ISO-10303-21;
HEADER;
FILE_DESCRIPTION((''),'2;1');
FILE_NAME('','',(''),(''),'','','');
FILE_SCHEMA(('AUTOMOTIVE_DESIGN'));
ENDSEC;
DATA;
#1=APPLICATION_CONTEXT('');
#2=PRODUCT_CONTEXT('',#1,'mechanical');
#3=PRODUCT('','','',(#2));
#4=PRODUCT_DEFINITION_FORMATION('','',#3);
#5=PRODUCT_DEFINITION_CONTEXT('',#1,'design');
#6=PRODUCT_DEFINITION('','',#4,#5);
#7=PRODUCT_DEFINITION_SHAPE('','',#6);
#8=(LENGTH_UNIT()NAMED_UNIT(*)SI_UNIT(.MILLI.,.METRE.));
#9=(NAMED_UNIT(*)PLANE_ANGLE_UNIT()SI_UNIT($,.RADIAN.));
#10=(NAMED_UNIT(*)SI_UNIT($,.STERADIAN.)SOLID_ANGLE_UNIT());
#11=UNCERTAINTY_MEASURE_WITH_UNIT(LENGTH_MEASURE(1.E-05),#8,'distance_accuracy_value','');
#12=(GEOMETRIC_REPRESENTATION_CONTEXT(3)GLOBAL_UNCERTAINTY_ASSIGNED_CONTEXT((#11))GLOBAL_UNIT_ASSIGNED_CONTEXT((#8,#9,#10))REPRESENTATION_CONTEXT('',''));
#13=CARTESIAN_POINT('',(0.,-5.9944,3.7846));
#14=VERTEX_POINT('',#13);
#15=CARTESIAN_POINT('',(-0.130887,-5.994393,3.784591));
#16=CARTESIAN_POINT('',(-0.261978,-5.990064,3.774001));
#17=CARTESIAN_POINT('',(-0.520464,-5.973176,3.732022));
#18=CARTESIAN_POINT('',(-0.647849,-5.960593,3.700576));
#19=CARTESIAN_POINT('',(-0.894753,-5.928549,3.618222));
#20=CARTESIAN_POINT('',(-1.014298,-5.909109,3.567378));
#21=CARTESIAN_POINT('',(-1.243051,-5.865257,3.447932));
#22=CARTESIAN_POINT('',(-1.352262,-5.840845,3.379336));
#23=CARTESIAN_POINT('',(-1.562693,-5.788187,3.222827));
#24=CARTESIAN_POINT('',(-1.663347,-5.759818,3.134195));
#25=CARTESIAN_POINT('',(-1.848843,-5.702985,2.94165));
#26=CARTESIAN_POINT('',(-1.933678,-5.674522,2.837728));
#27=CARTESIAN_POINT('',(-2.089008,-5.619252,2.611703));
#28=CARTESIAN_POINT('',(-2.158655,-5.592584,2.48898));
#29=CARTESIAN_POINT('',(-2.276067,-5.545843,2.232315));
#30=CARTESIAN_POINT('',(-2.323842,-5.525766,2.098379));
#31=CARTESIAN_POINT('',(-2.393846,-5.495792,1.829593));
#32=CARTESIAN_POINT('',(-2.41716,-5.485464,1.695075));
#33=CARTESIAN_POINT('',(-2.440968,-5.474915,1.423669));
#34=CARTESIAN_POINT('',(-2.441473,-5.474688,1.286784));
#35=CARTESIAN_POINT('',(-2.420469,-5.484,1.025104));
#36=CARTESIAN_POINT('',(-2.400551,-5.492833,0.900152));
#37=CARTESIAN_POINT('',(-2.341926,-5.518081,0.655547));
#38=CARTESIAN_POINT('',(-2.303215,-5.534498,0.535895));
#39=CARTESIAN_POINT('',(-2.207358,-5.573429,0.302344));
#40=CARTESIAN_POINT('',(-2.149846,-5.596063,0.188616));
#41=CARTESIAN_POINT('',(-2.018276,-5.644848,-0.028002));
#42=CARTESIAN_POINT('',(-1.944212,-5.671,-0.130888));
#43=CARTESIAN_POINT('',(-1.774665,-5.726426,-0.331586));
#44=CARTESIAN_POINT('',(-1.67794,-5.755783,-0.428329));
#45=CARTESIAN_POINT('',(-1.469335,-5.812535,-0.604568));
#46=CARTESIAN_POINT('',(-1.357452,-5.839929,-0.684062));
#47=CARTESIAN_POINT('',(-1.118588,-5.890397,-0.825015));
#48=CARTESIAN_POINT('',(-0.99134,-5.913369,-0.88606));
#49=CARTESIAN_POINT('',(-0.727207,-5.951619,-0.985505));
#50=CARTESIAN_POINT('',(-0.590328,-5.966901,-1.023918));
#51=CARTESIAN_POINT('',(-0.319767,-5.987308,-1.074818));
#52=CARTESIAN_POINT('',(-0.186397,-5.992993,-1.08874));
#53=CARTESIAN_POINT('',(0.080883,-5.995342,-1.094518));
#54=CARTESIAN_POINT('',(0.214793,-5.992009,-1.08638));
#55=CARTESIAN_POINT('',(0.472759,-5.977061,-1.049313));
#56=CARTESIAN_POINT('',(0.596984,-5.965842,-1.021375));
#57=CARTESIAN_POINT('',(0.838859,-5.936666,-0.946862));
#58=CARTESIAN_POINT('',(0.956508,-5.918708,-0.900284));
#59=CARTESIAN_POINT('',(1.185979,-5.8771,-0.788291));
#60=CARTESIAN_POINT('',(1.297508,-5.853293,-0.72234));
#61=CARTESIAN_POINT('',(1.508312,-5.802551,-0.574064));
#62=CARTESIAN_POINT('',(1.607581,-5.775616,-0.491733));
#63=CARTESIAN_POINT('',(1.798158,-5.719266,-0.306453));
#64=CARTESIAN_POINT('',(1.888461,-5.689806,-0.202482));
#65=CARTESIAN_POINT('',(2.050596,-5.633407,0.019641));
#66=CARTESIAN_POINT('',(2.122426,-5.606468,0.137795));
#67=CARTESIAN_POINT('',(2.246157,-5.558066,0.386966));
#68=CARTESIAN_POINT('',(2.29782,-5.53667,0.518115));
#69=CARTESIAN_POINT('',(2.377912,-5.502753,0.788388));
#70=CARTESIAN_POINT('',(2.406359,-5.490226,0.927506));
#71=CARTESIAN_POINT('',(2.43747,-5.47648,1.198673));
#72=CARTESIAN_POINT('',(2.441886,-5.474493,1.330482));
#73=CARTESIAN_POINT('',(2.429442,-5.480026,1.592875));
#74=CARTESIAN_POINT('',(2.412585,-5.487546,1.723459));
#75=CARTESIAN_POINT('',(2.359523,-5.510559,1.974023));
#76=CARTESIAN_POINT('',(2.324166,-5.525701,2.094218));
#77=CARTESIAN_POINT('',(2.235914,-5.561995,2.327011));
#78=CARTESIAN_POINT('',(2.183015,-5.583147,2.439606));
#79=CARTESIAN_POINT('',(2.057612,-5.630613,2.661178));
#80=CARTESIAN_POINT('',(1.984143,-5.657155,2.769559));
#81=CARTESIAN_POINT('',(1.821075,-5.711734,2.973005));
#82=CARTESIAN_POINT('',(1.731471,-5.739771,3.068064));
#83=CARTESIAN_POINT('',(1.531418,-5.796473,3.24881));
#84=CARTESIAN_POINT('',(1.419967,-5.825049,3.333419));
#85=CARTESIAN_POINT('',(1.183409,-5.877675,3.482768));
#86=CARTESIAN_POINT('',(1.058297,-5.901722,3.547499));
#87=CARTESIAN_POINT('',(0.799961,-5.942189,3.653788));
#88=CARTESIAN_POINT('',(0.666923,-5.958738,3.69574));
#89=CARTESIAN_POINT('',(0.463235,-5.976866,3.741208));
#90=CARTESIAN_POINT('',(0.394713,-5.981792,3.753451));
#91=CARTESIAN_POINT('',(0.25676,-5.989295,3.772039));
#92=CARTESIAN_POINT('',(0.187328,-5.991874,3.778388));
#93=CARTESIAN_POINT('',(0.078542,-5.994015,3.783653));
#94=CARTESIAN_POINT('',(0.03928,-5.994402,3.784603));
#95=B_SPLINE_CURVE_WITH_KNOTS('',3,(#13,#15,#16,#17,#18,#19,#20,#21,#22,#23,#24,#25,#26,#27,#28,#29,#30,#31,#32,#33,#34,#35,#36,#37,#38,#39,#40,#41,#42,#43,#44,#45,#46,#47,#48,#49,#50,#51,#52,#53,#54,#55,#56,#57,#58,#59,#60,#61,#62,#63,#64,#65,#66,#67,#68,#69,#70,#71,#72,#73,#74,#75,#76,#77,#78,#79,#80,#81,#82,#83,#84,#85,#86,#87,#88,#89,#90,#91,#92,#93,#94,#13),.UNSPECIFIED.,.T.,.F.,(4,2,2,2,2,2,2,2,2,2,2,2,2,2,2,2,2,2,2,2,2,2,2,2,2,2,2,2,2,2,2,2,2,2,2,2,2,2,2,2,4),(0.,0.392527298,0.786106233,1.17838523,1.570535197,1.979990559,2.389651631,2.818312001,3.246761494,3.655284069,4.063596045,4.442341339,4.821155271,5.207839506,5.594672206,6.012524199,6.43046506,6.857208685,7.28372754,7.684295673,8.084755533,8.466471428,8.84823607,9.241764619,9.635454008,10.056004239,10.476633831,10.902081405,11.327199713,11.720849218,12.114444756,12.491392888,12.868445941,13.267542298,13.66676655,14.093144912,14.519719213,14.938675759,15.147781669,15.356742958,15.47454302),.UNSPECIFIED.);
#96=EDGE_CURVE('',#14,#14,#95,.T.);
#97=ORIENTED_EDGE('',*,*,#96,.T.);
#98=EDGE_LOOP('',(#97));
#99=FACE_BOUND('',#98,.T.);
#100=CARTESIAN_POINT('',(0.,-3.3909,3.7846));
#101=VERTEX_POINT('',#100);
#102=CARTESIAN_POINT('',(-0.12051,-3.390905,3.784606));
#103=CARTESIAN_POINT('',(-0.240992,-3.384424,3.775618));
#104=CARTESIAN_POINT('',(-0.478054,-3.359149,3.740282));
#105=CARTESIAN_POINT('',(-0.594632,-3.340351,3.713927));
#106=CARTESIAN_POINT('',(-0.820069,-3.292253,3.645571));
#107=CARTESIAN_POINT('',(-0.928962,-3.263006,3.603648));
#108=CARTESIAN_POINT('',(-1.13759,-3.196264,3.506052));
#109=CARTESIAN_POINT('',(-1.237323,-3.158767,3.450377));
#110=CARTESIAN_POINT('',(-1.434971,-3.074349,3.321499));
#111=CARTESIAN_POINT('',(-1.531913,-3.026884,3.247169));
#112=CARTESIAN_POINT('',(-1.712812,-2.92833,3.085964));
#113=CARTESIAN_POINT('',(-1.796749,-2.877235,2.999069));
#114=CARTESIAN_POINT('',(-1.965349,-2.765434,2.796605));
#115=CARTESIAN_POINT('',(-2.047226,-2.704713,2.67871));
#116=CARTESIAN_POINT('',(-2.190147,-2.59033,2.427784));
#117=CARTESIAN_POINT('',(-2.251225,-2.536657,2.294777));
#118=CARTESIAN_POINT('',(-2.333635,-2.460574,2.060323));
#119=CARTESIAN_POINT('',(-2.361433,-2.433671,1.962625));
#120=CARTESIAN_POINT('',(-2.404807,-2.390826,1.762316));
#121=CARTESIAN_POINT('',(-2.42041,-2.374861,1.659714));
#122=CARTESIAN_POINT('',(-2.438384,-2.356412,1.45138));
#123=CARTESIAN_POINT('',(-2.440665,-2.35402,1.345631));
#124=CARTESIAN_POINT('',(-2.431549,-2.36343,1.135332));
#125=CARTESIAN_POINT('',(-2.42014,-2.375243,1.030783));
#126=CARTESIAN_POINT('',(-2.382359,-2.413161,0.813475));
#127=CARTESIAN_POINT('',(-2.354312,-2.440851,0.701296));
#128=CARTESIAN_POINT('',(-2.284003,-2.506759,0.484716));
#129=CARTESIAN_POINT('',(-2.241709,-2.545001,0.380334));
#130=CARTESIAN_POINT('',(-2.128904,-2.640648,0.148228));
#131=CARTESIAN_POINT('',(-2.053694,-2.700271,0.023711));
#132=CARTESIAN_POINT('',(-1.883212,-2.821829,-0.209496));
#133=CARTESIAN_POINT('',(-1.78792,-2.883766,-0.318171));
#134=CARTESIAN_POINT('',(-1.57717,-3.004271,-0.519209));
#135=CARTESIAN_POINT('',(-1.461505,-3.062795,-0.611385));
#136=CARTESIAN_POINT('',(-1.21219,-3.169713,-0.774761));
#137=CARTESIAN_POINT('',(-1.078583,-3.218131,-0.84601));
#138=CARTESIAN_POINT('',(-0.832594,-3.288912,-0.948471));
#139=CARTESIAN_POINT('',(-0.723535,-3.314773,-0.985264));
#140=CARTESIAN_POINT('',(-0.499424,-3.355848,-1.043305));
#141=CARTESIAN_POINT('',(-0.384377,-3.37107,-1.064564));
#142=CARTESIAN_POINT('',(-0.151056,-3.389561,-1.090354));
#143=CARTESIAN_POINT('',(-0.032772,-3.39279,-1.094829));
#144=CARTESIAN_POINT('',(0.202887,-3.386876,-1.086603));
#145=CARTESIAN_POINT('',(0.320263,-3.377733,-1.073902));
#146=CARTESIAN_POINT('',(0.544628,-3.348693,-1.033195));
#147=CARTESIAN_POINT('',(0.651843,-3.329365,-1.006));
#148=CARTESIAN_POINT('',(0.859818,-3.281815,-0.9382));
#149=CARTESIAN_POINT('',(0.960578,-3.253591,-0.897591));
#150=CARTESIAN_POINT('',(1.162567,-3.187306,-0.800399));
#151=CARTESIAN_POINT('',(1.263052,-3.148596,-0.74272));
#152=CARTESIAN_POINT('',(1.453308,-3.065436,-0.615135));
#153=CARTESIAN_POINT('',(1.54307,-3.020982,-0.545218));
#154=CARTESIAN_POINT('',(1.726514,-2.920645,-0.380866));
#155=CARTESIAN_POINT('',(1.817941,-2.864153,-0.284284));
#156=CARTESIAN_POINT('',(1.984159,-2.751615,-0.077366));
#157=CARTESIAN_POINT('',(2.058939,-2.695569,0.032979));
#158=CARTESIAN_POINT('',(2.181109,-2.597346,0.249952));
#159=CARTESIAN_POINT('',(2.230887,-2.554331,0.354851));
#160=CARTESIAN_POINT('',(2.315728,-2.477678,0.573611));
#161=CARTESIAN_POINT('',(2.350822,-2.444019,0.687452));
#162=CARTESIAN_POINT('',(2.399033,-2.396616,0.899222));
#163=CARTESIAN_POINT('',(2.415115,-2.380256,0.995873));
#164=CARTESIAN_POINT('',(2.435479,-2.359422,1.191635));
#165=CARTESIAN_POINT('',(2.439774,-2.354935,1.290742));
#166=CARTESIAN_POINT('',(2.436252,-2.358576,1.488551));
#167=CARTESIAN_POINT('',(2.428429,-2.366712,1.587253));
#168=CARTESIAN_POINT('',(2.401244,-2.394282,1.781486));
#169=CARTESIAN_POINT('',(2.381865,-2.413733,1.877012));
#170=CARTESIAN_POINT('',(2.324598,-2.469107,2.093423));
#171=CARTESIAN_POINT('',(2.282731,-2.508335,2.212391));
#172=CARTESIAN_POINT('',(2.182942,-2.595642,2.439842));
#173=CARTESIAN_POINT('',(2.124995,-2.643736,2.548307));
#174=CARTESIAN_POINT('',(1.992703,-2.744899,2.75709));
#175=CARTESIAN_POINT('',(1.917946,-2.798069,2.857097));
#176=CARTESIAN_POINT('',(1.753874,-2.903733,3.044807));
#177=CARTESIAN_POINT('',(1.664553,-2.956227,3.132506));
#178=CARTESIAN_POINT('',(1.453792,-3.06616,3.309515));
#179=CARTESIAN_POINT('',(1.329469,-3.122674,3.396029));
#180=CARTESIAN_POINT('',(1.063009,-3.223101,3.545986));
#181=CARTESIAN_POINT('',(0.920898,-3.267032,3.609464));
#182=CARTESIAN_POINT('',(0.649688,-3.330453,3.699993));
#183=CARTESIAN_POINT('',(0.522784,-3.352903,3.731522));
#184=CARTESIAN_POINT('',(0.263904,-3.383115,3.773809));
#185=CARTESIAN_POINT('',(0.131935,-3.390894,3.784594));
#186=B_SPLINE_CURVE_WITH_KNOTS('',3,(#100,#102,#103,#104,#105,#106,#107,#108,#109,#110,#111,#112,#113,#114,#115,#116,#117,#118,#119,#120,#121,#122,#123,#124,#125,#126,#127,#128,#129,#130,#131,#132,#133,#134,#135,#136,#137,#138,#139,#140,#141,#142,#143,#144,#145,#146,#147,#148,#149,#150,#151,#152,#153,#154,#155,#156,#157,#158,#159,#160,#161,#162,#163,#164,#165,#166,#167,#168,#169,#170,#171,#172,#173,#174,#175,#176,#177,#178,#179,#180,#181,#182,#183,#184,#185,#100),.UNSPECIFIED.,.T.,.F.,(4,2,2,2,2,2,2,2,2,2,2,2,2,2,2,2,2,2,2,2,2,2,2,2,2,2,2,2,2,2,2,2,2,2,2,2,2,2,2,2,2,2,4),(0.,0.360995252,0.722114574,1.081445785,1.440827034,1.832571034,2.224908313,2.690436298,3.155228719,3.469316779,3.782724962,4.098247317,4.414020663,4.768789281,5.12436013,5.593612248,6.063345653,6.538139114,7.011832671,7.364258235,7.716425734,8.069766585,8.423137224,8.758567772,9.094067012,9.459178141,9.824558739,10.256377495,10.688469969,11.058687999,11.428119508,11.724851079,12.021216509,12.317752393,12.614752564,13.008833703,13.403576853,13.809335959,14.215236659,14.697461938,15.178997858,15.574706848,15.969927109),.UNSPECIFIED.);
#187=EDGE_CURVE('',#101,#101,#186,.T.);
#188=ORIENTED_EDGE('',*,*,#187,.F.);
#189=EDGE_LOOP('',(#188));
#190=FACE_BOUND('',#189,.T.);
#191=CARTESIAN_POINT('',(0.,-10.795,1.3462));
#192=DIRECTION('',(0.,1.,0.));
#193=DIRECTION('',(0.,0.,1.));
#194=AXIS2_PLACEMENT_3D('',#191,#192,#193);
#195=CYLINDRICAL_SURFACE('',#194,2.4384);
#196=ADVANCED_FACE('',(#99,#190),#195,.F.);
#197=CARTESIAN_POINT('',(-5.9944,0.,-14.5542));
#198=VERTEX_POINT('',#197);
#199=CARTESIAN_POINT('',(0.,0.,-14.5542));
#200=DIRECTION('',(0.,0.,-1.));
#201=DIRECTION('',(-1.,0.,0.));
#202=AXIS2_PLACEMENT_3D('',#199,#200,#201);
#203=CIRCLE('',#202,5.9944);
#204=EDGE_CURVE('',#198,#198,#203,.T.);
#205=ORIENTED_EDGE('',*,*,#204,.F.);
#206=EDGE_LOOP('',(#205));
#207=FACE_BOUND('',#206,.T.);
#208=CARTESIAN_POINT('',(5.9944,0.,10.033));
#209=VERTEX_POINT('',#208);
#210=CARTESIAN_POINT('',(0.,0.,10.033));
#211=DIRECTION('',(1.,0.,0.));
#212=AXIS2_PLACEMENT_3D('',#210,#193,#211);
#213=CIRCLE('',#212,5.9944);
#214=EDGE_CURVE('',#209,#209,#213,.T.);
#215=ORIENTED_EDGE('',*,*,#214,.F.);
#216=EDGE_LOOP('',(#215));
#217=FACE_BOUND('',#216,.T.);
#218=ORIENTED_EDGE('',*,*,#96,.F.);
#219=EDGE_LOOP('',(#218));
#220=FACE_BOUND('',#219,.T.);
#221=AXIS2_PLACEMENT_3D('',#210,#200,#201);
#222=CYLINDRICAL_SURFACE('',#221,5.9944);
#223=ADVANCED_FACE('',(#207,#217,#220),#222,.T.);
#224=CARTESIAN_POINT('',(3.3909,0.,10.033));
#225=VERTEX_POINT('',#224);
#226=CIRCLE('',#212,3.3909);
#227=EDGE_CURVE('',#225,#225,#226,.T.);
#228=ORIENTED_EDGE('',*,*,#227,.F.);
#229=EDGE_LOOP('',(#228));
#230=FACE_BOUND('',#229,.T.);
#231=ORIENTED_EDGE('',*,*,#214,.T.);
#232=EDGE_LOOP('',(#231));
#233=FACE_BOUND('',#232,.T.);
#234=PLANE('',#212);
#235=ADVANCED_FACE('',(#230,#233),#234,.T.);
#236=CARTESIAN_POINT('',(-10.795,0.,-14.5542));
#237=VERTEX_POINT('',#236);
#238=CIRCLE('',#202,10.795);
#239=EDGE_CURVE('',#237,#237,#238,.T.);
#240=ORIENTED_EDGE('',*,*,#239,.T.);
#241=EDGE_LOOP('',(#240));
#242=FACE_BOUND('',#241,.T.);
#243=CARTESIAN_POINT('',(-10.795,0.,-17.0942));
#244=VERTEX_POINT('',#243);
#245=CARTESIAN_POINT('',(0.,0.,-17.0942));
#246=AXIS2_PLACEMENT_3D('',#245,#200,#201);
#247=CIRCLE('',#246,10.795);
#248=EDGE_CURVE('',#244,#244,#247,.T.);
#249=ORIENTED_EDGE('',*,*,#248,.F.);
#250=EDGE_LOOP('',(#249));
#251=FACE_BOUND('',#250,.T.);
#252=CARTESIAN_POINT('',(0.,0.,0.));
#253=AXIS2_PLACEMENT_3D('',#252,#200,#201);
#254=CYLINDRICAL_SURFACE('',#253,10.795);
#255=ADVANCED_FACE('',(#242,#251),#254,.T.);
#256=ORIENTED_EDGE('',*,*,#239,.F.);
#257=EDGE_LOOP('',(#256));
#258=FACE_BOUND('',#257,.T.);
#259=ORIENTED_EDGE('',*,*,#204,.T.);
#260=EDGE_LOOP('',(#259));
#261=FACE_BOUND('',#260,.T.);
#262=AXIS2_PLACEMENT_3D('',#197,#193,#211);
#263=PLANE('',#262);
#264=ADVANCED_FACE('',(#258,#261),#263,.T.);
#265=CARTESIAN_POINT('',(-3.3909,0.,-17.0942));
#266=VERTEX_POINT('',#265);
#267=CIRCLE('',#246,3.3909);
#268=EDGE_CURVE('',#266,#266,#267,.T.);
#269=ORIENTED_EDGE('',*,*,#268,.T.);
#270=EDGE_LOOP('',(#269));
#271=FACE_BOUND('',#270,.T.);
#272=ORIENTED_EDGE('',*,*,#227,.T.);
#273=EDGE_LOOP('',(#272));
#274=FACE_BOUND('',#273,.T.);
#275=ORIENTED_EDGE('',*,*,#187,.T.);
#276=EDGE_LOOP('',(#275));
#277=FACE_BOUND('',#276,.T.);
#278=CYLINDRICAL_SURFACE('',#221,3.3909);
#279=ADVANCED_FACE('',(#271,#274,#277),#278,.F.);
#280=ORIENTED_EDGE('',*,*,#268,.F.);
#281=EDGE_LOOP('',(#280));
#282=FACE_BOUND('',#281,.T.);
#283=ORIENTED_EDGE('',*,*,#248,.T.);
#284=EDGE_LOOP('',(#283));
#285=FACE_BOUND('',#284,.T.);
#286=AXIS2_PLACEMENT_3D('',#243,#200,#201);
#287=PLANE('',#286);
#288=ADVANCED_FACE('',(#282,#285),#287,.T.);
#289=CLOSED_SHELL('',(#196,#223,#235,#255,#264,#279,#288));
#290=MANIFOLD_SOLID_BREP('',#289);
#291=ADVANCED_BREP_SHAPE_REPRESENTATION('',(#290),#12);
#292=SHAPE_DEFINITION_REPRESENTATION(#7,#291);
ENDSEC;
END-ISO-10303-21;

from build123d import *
from build123d.topology import SkipClean

# Parameters (mm, degrees)
SKETCH2_R           = 5.9944
SKETCH2_R_2         = 3.3909
BOSS_EXTRUDE1_DEPTH = 10.033
SKETCH3_R           = 2.4384
CUT_EXTRUDE1_DEPTH  = 23.918894468


with BuildPart() as part:
    # Sketch2 → Boss-Extrude1 (new body)
    with BuildSketch(Plane.XY):
        Circle(SKETCH2_R)
        Circle(SKETCH2_R_2, mode=Mode.SUBTRACT)
    extrude(amount=BOSS_EXTRUDE1_DEPTH)

    # Sketch6 → Revolve1 (revolve)
    with SkipClean():  # the faces are left unmerged after this step: merging them gives an invalid solid
        with BuildSketch(Plane(origin=(0, 0, 0), x_dir=(1, 0, 0), z_dir=(0, 1, 0))):
            Polygon((-5.9944, 0), (-5.9944, 14.5542), (-10.795, 14.5542), (-10.795, 17.0942), (-3.3909, 17.0942), (-3.3909, 0), align=None)
        revolve(axis=Axis((0, 0, 0), (0, 0, 1)))

    # Sketch3 → Cut-Extrude1 (cut, through all)
    with SkipClean():  # the faces are left unmerged after this step: merging them gives an invalid solid
        with BuildSketch(Plane.XZ):
            with Locations((0, 1.3462)):
                Circle(SKETCH3_R)
        extrude(amount=CUT_EXTRUDE1_DEPTH, mode=Mode.SUBTRACT)


solid = part.part
